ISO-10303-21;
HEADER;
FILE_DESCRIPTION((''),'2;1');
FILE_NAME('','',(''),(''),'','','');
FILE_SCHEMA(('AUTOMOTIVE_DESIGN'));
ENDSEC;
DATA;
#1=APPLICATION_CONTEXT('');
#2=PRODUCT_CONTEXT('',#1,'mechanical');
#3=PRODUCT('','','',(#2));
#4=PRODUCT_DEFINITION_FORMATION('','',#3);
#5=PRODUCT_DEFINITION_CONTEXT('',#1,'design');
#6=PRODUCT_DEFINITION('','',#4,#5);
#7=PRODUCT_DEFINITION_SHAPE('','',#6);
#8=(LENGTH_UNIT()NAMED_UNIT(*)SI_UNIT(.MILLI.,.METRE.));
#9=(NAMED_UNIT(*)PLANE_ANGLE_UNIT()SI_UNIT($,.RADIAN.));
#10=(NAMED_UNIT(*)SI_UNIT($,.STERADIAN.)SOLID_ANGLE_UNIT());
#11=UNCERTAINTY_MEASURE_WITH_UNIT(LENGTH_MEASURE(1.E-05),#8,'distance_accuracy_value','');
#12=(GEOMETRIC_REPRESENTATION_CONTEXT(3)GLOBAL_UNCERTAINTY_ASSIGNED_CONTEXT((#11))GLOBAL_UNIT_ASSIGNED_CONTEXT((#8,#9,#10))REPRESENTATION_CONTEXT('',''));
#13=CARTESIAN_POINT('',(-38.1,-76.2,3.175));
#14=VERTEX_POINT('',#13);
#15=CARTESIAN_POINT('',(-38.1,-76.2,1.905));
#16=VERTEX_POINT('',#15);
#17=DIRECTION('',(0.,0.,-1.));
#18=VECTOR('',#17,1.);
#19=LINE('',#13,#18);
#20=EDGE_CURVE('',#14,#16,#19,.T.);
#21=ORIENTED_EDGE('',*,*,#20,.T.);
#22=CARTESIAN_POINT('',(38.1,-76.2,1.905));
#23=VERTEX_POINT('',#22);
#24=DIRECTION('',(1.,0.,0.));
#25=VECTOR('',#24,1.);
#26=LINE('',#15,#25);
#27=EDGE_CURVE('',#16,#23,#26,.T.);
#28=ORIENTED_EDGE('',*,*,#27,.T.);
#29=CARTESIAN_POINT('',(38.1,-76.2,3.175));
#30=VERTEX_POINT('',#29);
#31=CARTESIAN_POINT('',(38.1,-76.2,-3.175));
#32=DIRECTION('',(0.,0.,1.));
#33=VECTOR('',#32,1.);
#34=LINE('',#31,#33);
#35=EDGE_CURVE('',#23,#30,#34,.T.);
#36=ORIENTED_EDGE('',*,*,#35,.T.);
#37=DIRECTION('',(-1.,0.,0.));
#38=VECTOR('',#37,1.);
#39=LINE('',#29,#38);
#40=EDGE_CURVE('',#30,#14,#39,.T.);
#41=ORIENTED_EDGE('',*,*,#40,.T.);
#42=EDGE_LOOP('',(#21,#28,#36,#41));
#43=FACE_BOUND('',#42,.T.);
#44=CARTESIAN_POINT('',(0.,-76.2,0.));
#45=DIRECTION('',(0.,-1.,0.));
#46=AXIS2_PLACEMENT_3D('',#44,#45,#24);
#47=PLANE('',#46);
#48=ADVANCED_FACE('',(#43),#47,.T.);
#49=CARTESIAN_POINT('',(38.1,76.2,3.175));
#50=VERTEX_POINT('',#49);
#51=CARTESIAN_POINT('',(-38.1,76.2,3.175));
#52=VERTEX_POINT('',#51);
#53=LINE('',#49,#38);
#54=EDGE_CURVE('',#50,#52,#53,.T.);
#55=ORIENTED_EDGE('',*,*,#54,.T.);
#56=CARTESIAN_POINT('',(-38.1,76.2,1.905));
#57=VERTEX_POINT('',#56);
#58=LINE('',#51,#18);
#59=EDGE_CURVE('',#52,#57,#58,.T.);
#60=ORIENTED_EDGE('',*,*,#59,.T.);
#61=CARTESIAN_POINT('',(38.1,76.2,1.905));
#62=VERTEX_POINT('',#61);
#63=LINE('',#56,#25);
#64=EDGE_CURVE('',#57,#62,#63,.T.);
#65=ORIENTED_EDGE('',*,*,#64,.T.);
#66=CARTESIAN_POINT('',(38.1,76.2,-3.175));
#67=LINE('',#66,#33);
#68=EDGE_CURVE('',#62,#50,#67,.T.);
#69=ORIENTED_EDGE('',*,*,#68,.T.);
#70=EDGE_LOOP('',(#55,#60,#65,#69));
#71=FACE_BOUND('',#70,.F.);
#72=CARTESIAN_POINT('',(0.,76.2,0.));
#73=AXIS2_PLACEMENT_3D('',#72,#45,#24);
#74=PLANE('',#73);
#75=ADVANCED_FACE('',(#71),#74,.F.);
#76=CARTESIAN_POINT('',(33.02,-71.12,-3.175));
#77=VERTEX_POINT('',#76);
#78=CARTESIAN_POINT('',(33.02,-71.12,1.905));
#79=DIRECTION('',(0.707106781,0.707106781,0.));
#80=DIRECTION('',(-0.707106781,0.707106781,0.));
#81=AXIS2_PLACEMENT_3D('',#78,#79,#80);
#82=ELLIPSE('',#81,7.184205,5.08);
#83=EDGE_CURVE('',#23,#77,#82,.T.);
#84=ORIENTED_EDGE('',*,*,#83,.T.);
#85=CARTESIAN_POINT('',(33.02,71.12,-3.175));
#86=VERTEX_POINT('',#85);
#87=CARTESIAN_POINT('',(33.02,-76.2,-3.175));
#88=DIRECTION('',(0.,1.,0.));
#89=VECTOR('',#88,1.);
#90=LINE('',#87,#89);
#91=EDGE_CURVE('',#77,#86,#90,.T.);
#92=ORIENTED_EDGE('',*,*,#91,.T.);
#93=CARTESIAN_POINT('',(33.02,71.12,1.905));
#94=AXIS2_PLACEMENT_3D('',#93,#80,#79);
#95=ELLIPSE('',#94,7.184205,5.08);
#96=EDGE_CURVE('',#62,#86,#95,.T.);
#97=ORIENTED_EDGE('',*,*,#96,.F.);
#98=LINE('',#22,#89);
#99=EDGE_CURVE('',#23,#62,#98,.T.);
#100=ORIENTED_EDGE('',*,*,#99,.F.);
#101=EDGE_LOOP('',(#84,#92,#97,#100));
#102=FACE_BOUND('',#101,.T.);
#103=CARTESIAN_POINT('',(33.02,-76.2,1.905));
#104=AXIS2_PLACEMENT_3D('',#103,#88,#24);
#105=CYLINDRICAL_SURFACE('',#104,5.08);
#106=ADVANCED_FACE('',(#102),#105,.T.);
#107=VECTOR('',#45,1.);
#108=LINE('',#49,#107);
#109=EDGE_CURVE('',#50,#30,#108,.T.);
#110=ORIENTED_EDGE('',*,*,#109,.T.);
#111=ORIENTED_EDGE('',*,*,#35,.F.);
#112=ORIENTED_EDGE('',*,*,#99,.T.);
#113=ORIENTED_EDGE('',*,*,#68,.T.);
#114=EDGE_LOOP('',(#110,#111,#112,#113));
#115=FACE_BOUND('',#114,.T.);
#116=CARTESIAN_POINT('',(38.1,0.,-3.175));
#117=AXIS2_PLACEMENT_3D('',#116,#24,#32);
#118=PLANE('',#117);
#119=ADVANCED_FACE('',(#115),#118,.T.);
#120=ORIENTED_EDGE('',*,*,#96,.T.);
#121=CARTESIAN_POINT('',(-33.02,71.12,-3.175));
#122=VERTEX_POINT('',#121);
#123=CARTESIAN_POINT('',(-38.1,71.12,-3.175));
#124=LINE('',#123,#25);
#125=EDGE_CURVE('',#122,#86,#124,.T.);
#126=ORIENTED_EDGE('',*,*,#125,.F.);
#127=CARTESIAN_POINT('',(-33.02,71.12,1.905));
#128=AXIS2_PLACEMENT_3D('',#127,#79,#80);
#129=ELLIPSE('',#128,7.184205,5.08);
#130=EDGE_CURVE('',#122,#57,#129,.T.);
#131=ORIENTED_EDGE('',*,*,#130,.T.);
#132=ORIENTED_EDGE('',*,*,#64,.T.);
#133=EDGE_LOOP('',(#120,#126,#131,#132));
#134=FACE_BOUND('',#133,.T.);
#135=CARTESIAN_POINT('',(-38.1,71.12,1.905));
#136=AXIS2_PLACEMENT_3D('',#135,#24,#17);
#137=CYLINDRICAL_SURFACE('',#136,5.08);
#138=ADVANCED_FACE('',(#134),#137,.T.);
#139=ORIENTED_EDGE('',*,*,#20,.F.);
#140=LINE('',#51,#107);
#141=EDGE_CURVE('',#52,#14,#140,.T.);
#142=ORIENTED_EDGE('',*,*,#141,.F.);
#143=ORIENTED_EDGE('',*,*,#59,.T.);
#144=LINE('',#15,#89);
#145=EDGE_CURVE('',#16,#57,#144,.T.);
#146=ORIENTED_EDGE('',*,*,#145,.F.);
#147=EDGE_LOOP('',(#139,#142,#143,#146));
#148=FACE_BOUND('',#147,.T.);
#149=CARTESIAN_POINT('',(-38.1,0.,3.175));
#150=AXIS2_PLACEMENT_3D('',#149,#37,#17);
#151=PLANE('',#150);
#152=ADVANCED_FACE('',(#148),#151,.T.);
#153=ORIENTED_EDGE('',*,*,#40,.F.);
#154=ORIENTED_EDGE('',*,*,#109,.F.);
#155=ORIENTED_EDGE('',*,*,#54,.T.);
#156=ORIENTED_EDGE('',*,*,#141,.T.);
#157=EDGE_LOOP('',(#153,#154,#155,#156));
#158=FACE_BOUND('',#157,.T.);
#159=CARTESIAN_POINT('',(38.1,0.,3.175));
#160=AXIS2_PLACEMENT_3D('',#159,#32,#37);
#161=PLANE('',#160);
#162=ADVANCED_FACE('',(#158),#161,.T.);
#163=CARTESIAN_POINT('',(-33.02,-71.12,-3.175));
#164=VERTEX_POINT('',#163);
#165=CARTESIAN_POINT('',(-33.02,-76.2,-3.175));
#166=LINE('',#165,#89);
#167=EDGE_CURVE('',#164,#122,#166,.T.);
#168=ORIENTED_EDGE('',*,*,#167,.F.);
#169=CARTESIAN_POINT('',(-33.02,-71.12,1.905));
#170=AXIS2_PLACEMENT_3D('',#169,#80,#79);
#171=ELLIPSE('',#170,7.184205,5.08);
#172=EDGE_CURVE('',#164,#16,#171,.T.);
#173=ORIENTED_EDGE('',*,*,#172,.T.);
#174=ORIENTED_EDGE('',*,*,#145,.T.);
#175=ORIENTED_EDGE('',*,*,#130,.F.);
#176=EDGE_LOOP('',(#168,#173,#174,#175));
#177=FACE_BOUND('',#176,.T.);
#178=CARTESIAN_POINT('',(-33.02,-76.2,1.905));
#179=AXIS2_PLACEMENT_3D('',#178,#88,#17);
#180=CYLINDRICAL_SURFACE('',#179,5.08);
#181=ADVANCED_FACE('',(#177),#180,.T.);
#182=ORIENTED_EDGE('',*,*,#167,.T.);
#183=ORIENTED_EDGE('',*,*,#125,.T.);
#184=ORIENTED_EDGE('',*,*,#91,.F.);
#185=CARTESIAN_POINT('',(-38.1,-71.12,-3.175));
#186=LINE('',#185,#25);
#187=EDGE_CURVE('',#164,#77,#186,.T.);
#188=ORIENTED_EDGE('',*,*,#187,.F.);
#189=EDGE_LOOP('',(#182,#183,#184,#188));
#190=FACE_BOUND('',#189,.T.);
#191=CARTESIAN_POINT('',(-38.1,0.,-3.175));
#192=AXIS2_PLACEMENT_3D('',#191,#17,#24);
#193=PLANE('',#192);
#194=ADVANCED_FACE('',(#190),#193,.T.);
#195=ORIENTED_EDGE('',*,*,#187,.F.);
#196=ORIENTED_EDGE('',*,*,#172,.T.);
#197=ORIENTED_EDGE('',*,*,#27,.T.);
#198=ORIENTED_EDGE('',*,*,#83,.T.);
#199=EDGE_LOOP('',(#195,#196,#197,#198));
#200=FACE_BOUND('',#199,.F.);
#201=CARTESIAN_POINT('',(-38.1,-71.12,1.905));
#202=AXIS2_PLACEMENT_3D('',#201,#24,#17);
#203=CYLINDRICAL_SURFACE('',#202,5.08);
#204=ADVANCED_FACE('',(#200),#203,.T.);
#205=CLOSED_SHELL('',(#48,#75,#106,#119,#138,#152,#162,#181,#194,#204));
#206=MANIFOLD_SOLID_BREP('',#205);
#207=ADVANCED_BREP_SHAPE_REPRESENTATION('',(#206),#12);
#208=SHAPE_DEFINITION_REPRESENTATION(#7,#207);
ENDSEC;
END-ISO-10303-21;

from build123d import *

# Parameters (mm, degrees)
F1_DEPTH = 76.2
F2_DEPTH = 6.35
F3_R     = 5.08


# Not quite as in the source:
# - the program builds the solid bodies; features that only make, move or delete a surface that nothing else refers to are left out


with BuildPart() as f1:
    # F0 (on Front) → F1 (new body, symmetric)
    with BuildSketch(Plane.XZ):
        Polygon((34.29, -3.175), (38.1, -3.175), (38.1, 3.175), (-38.1, 3.175), (-38.1, -3.175), (-34.29, -3.175), align=None)
    extrude(amount=F1_DEPTH, both=True)

    # F0 (on Front) → F2 (join)
    with BuildSketch(Plane.XZ):
        Polygon((34.29, -3.175), (38.1, -3.175), (38.1, 3.175), (-38.1, 3.175), (-38.1, -3.175), (-34.29, -3.175), align=None)
    extrude(amount=F2_DEPTH)

    # F3
    f3_edges = [f1.edges().sort_by_distance(p)[0] for p in [
        (38.1, 0, -3.175),
        (0, -76.2, -3.175),
        (-38.1, 0, -3.175),
        (0, 76.2, -3.175),
    ]]
    fillet(f3_edges, radius=F3_R)


solid = f1.part
